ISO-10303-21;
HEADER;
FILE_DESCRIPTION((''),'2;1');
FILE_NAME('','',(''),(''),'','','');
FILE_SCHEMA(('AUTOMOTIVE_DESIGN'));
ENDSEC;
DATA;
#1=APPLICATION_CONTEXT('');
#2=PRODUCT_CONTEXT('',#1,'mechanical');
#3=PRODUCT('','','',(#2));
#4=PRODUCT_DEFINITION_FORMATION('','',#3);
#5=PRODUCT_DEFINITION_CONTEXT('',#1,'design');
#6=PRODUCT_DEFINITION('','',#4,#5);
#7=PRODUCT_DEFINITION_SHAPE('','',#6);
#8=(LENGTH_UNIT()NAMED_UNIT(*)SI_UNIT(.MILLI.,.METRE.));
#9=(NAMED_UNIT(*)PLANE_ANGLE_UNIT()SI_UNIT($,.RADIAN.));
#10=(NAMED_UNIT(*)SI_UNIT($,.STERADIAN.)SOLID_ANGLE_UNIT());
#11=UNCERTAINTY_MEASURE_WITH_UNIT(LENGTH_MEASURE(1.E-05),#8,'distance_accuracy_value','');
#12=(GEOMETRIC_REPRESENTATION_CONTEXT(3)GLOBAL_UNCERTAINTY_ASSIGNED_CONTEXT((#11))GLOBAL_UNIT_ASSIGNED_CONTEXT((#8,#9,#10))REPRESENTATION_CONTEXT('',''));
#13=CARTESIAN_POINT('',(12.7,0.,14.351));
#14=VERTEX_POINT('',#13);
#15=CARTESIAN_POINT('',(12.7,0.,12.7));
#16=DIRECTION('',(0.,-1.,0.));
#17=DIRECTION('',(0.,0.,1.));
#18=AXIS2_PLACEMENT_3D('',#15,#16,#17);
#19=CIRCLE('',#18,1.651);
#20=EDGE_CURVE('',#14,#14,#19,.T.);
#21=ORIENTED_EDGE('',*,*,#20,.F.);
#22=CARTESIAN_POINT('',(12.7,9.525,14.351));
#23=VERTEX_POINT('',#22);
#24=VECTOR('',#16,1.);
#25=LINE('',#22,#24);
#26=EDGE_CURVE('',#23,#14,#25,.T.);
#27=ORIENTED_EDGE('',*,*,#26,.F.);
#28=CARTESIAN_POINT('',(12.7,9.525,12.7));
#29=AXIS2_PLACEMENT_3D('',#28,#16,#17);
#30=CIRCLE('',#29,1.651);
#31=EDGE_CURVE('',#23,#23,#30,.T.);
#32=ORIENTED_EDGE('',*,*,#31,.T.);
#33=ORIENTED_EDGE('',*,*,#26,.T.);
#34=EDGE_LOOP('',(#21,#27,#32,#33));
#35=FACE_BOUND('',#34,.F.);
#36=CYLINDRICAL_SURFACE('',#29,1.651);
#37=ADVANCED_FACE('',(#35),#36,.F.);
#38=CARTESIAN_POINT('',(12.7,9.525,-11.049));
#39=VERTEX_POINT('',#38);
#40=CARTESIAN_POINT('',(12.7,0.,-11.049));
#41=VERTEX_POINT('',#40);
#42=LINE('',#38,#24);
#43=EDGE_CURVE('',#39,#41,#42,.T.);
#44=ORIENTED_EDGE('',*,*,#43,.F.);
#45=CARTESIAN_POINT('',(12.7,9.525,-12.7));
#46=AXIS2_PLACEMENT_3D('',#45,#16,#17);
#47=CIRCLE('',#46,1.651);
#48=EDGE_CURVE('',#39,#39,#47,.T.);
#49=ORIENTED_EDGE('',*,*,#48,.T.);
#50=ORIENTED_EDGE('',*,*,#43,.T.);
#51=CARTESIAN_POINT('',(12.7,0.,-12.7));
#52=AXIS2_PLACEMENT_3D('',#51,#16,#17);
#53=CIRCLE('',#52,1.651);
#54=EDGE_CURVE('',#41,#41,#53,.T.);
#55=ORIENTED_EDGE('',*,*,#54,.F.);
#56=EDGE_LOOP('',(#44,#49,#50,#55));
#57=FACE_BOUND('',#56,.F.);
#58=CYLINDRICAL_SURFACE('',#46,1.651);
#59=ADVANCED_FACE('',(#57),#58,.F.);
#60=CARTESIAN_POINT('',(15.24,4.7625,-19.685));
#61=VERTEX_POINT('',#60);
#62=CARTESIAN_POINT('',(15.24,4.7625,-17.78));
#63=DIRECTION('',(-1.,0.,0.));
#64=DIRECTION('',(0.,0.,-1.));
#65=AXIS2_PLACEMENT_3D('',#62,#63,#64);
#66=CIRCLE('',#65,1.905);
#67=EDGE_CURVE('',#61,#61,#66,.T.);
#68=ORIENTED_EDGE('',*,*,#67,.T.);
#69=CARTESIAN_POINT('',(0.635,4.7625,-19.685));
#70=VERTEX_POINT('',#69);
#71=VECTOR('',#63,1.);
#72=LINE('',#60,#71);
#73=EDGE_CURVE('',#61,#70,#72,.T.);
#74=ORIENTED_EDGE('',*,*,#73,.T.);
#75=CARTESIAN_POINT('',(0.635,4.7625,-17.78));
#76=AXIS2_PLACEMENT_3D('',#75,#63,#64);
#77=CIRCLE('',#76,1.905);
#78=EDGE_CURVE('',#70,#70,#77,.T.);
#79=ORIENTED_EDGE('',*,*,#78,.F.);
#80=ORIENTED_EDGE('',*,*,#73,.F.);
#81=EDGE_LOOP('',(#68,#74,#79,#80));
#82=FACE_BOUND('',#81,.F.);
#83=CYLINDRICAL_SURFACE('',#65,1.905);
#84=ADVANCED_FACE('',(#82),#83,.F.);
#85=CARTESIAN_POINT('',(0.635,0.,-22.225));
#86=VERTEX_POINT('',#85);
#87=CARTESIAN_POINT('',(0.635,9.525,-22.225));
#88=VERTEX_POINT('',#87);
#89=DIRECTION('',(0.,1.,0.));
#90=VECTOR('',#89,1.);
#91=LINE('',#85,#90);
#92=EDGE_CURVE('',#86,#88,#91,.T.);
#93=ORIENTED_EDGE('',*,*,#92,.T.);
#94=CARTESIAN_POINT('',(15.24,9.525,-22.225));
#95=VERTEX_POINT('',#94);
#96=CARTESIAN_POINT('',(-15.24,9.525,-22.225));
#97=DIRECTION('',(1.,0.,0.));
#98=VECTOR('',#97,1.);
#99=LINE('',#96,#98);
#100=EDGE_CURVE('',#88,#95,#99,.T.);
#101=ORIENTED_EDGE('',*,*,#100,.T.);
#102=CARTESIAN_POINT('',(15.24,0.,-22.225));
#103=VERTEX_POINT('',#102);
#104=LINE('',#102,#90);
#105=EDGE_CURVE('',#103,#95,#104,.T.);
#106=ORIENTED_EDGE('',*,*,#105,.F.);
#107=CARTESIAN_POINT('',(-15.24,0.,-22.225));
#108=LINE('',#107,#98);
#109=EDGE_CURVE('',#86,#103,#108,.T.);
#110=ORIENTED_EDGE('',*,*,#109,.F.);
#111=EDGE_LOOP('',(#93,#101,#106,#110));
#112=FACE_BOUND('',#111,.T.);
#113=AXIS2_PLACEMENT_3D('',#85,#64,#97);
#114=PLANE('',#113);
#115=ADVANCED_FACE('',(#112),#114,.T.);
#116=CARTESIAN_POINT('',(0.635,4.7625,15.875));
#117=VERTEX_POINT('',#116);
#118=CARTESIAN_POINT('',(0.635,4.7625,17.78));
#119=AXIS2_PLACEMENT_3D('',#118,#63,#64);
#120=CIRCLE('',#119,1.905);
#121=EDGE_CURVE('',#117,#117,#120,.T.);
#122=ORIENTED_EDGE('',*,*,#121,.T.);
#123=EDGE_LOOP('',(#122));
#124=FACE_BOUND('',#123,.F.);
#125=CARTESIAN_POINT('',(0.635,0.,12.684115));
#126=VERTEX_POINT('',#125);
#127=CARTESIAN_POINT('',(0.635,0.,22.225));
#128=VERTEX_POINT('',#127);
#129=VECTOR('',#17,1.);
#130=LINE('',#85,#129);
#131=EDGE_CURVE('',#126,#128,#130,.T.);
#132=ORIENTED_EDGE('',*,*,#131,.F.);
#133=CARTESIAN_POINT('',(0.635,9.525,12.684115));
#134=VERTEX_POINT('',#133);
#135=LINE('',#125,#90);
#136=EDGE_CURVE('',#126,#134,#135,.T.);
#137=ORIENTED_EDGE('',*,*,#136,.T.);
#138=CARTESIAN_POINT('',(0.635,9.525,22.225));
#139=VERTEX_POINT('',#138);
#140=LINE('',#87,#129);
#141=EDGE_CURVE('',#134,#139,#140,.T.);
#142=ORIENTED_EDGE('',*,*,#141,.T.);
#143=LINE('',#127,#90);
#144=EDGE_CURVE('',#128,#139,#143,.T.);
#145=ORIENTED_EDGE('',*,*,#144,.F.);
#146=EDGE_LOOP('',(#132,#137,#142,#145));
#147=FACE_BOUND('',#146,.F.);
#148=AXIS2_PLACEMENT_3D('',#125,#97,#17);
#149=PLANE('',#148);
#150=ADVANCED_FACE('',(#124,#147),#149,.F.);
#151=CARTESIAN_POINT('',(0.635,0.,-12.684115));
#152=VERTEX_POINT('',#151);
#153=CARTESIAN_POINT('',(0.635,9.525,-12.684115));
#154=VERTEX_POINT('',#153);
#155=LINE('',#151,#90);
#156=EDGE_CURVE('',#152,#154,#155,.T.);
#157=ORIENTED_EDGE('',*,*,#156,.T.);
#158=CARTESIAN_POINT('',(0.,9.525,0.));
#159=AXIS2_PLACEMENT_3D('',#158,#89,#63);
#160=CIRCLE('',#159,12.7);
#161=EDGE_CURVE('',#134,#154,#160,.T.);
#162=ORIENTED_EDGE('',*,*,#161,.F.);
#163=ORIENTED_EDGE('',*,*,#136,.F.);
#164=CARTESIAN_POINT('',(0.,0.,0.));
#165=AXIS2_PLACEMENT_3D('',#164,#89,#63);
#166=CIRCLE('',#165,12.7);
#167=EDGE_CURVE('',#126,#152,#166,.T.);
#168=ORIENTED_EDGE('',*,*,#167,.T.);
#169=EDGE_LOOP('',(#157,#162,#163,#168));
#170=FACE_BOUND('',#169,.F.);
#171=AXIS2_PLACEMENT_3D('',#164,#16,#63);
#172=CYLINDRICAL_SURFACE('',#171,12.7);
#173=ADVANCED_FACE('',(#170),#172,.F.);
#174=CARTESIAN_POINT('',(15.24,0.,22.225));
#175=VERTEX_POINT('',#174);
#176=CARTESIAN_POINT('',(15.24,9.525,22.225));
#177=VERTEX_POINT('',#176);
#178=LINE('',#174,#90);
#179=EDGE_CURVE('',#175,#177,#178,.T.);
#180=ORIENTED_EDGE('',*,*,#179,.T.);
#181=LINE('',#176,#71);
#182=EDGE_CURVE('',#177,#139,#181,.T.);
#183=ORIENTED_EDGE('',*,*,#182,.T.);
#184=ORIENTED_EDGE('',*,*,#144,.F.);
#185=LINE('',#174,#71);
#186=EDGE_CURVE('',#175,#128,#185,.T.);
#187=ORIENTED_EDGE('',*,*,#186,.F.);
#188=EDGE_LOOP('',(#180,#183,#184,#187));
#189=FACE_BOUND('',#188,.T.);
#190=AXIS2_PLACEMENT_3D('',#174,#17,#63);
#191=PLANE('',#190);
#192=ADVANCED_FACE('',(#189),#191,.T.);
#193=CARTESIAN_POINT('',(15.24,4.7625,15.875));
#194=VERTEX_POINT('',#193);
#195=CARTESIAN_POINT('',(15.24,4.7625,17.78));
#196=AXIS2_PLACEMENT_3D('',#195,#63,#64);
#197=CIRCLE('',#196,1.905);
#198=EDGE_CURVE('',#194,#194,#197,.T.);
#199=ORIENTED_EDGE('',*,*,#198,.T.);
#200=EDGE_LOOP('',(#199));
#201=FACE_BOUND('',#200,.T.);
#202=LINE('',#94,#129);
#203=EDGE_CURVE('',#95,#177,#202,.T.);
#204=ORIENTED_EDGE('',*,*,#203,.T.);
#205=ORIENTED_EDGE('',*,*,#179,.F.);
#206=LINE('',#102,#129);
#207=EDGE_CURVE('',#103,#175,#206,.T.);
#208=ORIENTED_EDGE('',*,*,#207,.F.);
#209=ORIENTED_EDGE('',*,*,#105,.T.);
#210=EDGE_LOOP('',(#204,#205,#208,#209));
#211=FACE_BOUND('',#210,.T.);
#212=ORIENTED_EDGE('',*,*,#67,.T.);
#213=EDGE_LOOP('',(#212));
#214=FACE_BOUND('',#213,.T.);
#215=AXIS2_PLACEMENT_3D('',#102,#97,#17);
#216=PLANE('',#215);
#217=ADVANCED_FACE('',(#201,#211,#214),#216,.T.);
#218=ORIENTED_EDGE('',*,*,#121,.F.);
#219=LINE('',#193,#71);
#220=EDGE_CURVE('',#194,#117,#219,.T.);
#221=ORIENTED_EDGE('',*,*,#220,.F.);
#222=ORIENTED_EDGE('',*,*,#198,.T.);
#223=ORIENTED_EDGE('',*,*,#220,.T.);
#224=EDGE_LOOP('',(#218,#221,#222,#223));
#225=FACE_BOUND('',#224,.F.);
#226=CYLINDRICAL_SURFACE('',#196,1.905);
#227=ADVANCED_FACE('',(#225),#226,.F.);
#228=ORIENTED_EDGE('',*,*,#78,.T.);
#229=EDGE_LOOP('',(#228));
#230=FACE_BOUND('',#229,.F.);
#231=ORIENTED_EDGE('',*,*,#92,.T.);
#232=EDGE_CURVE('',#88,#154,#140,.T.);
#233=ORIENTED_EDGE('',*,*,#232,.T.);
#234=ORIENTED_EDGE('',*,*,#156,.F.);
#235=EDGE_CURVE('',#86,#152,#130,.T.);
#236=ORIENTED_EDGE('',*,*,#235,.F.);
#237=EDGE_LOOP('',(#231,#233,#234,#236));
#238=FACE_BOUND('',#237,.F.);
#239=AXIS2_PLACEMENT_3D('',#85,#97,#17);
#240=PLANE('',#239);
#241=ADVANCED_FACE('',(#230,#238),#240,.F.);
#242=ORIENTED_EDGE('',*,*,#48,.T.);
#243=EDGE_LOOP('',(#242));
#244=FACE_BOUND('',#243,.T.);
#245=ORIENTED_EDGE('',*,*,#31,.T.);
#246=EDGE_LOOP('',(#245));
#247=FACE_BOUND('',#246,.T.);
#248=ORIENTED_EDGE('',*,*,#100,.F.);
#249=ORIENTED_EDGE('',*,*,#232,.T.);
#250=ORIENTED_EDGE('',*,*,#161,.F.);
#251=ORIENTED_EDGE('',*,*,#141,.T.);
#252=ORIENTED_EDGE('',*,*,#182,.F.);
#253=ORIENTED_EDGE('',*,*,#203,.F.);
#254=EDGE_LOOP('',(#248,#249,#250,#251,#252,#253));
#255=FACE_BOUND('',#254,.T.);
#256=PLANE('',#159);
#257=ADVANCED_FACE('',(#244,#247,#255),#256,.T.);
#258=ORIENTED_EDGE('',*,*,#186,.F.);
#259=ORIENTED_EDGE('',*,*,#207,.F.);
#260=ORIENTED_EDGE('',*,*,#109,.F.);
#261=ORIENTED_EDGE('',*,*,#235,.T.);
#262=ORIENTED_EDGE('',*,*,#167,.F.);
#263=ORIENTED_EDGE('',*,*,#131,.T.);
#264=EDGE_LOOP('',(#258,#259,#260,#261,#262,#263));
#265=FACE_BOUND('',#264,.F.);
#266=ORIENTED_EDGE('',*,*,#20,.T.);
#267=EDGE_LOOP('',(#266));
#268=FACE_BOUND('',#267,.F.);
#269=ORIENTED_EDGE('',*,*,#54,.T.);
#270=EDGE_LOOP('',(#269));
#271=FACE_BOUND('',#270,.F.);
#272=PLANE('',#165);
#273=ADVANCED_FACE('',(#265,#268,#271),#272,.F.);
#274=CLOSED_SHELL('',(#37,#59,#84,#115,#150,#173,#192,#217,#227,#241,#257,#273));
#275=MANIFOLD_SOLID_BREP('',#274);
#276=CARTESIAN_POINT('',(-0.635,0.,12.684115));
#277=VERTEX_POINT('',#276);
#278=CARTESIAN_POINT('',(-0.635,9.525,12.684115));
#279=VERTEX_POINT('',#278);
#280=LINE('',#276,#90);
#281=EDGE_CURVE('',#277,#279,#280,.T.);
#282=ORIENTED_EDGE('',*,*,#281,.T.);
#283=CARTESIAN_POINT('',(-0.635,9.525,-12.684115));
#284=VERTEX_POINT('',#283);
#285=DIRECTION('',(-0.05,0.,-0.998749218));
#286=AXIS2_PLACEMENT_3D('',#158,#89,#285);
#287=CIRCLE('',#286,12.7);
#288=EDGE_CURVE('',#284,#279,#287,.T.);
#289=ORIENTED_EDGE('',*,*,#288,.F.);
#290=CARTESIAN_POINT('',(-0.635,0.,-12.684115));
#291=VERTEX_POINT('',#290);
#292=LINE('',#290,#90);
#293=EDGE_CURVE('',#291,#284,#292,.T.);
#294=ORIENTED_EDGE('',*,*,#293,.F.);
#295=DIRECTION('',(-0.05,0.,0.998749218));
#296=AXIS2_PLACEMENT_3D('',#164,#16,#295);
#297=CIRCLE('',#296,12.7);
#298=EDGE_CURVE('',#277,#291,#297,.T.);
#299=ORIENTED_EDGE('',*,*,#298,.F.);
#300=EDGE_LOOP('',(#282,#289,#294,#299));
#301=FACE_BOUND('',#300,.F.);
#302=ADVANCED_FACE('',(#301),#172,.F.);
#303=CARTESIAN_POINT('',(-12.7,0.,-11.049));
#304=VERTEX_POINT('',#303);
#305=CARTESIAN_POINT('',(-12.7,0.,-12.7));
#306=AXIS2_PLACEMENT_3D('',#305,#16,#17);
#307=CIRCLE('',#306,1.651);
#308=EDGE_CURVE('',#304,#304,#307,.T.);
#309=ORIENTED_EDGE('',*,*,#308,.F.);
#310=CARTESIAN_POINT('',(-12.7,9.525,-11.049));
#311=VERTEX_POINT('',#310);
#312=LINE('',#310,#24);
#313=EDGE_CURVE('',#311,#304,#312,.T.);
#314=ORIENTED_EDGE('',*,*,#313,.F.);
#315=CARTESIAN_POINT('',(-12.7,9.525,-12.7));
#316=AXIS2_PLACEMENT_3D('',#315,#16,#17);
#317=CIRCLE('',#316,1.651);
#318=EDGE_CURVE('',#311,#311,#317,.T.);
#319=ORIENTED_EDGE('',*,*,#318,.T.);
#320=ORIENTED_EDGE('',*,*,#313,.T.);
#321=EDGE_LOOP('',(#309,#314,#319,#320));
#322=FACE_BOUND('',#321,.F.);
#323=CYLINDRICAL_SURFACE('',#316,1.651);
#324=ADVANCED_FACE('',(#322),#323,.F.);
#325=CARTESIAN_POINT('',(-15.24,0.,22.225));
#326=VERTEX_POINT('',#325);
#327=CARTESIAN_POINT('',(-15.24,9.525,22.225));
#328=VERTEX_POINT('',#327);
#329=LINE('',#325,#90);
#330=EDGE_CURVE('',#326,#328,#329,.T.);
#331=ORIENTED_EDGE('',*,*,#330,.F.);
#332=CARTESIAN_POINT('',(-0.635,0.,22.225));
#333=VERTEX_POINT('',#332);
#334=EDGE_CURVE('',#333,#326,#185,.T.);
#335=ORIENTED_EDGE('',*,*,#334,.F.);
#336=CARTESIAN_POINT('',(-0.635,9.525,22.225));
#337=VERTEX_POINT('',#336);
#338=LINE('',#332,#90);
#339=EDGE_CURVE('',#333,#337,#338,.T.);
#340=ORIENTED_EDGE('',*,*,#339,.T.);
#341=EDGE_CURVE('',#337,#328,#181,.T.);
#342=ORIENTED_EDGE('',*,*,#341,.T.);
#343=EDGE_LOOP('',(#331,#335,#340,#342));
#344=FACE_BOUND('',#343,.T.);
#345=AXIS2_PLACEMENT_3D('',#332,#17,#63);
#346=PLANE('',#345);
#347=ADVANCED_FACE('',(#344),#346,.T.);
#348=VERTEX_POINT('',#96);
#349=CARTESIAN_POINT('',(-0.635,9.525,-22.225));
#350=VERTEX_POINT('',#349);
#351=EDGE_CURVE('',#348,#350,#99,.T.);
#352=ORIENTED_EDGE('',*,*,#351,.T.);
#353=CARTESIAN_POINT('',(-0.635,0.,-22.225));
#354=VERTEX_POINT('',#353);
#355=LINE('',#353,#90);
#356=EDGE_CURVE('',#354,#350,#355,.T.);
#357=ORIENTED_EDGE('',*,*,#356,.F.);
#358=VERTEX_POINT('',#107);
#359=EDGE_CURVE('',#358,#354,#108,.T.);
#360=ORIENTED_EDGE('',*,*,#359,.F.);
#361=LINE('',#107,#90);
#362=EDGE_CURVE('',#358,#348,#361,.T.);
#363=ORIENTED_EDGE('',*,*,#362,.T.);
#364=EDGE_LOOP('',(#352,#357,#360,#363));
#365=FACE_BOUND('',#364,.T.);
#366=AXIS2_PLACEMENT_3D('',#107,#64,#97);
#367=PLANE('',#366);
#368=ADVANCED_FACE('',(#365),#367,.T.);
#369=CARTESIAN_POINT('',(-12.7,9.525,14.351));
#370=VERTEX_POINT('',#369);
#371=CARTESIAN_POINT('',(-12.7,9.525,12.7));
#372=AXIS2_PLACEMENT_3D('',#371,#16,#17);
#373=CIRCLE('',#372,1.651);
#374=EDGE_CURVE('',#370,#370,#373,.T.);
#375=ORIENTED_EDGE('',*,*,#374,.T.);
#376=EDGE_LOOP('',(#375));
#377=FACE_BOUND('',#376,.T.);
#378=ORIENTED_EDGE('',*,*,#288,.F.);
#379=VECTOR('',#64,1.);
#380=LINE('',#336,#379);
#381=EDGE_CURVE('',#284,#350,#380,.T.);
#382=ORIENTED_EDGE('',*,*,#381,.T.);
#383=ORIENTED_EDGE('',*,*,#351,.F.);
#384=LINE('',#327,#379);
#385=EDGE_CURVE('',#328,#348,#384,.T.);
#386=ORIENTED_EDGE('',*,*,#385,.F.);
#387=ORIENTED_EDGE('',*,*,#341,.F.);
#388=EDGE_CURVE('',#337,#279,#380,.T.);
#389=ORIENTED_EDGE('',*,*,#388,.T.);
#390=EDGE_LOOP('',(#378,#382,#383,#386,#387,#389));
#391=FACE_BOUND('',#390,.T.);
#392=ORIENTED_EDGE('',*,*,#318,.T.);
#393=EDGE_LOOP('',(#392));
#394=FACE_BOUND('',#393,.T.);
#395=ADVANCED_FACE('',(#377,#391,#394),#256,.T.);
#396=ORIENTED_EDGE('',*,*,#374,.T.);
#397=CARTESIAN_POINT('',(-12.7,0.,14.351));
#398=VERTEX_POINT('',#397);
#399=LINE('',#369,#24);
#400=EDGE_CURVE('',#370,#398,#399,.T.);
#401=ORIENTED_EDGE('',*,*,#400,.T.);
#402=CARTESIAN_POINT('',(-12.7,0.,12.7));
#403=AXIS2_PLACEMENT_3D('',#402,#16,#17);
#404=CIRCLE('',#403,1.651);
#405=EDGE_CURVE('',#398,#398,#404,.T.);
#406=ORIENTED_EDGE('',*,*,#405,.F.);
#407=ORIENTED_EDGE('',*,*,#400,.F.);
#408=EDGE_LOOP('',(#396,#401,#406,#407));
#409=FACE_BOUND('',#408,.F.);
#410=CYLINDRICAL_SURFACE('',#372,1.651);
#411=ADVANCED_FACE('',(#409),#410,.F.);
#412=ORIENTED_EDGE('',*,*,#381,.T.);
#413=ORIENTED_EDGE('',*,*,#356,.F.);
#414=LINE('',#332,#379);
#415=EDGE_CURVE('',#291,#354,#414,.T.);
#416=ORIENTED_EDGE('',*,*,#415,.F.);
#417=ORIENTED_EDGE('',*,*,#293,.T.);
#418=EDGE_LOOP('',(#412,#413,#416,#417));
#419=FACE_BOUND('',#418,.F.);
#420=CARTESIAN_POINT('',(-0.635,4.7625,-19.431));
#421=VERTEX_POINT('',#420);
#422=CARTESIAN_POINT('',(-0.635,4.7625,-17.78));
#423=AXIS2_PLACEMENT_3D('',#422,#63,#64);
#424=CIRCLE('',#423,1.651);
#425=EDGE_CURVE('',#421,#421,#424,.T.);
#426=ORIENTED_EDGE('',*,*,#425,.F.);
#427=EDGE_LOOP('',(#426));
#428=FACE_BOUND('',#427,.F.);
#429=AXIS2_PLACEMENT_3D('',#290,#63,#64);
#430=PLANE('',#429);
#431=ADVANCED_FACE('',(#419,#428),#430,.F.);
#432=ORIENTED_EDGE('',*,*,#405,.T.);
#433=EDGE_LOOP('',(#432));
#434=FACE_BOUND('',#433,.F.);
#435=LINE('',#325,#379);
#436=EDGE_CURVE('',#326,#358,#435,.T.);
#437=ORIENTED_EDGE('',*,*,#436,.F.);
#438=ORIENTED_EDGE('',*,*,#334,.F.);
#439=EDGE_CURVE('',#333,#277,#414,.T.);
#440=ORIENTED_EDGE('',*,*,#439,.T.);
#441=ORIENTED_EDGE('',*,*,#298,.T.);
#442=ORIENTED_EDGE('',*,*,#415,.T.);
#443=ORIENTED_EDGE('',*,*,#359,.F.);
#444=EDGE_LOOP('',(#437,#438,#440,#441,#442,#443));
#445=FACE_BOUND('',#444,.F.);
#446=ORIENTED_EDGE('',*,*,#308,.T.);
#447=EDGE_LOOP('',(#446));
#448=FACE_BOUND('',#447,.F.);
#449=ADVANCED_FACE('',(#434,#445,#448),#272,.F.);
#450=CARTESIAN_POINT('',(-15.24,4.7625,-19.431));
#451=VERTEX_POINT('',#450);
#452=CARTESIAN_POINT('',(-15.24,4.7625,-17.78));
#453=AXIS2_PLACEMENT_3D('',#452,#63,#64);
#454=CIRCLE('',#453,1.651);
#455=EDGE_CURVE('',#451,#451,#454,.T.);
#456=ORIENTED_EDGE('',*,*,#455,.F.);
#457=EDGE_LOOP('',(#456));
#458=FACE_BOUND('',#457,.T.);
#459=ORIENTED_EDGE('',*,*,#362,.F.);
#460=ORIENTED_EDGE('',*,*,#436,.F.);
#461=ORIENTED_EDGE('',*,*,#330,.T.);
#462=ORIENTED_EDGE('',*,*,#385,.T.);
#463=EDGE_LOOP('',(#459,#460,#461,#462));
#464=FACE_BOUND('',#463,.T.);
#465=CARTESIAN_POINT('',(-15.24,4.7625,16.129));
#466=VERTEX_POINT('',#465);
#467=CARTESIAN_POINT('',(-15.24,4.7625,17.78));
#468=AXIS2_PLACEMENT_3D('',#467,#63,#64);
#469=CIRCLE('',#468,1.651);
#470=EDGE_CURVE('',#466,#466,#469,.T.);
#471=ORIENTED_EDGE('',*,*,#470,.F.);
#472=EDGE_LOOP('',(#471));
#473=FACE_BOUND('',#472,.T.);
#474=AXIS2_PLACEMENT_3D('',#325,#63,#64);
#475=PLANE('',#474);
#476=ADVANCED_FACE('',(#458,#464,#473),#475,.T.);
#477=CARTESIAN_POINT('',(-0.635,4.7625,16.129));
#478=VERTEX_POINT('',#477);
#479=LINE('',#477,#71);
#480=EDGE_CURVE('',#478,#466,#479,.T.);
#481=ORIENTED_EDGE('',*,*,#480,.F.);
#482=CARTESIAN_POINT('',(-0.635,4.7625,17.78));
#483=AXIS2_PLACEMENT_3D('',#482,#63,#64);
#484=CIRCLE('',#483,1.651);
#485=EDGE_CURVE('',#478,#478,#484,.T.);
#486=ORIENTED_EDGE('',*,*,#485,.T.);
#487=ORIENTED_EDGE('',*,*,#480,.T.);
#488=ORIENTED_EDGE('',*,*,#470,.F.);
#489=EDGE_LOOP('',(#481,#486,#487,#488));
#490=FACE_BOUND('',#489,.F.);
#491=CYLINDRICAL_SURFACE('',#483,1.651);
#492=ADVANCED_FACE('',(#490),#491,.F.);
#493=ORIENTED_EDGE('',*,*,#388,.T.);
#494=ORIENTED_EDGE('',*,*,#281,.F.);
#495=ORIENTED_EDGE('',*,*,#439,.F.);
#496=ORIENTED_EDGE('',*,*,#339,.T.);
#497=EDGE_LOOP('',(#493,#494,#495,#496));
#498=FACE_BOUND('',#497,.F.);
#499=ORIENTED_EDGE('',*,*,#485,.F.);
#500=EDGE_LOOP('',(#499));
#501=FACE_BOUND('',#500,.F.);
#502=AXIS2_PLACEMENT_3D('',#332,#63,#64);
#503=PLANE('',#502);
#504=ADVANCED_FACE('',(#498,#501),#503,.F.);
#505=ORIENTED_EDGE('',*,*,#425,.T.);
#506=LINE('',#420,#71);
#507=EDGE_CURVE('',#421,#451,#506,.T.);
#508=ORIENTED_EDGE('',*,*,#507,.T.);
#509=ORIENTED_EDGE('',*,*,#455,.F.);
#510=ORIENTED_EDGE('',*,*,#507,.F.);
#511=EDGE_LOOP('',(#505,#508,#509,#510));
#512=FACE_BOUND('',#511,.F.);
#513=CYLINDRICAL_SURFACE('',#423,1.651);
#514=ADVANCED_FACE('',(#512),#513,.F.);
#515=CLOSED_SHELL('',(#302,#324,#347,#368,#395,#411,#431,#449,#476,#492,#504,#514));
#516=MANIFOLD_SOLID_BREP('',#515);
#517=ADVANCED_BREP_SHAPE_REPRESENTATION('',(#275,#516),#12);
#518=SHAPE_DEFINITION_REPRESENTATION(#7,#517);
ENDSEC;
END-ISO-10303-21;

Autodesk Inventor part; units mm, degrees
ref_plane "YZ Plane" through (0, 0, 0) normal (1, 0, 0) x (0, 1, 0)
ref_plane "XZ Plane" through (0, 0, 0) normal (0, 1, 0) x (-1, 0, 0)
ref_plane "XY Plane" through (0, 0, 0) normal (0, 0, 1) x (1, 0, 0)
sketch "Sketch8" plane through (0, 0, 0) normal (0, 1, 0) x (-1, 0, 0)
  circle A0 centre (0, 0) radius 12.7
  line L0 (-15.24, 22.225) -> (15.24, 22.225)
  line L1 (15.24, 22.225) -> (15.24, -22.225)
  line L2 (15.24, -22.225) -> (-15.24, -22.225)
  line L3 (-15.24, -22.225) -> (-15.24, 22.225)
  line L4 (-15.24, 22.225) -> (15.24, -22.225) construction
  line L5 (15.24, 22.225) -> (-15.24, -22.225) construction
  line L6 (-0.635, 22.225) -> (0.635, 22.225)
  line L7 (0.635, 22.225) -> (0.635, -22.225)
  line L8 (0.635, -22.225) -> (-0.635, -22.225)
  line L9 (-0.635, -22.225) -> (-0.635, 22.225)
  line L10 (-0.635, 22.225) -> (0.635, -22.225) construction
  line L11 (0.635, 22.225) -> (-0.635, -22.225) construction
  dimension "d34" = 25.4
  dimension "d35" = 30.48
  dimension "d36" = 44.45
  dimension "d37" = 1.27
extrude "Extrusion6" add sketch "Sketch8" along normal blind 9.525 contours A0 L7 L0 L1 L2 | A0 L9 L2 L3 L0
sketch "Sketch9" plane through (15.24, 0, 22.225) normal (1, 0, 0) x (0, 0, -1)
  line L0 (4.445, -4.7625) -> (40.005, -4.7625) construction
  line L1 (40.005, -4.7625) -> (40.005, 4.7625) construction
  line L2 (40.005, 4.7625) -> (4.445, 4.7625) construction
  line L3 (4.445, 4.7625) -> (4.445, -4.7625) construction
  line L4 (4.445, -4.7625) -> (40.005, 4.7625) construction
  line L5 (40.005, -4.7625) -> (4.445, 4.7625) construction
  point P0 (22.225, 0)
  dimension "d40" = 35.56
  dimension "d41" = 9.525
hole "Hole3" at (15.24, 4.7625, 17.78) at (15.24, 4.7625, -17.78) direction (-1, 0, 0) diameter 3.81 depth 14.605 clearance for "Flat Head Machine Screw (82)" size "#6" standard "Ansi Unified Screw Threads"
sketch "Sketch10" plane through (-0.635, 0, 12.6841) normal (1, 0, 0) x (0, 0, -1)
  circle A0 centre (-5.0959, 4.7625) radius 1.905 projected
  circle A1 centre (30.4641, 4.7625) radius 1.905 projected
  point P0 (12.6841, 0)
hole "Hole4" at (-0.635, 4.7625, 17.78) at (-0.635, 4.7625, -17.78) direction (-1, 0, 0) diameter 3.302 end up to surface thread size "8-32 UNC" class "2B" standard "ANSI Unified Screw Threads"
sketch "Sketch11" plane through (0, 9.525, 0) normal (0, 1, 0) x (1, 0, 0)
  line L0 (-12.7, -12.7) -> (12.7, -12.7) construction
  line L1 (12.7, -12.7) -> (12.7, 12.7) construction
  line L2 (12.7, 12.7) -> (-12.7, 12.7) construction
  line L3 (-12.7, 12.7) -> (-12.7, -12.7) construction
  line L4 (-12.7, -12.7) -> (12.7, 12.7) construction
  line L5 (12.7, -12.7) -> (-12.7, 12.7) construction
  point P0 (0, 0)
  dimension "d56" = 25.4
  dimension "d57" = 25.4
hole "Hole5" at (-12.7, 9.525, -12.7) at (12.7, 9.525, -12.7) at (12.7, 9.525, 12.7) at (-12.7, 9.525, 12.7) direction (0, -1, 0) diameter 3.302 end through all thread size "8-32 UNC" class "2B" standard "ANSI Unified Screw Threads"
properties part number "4K heatsink bushing" material "Copper"
